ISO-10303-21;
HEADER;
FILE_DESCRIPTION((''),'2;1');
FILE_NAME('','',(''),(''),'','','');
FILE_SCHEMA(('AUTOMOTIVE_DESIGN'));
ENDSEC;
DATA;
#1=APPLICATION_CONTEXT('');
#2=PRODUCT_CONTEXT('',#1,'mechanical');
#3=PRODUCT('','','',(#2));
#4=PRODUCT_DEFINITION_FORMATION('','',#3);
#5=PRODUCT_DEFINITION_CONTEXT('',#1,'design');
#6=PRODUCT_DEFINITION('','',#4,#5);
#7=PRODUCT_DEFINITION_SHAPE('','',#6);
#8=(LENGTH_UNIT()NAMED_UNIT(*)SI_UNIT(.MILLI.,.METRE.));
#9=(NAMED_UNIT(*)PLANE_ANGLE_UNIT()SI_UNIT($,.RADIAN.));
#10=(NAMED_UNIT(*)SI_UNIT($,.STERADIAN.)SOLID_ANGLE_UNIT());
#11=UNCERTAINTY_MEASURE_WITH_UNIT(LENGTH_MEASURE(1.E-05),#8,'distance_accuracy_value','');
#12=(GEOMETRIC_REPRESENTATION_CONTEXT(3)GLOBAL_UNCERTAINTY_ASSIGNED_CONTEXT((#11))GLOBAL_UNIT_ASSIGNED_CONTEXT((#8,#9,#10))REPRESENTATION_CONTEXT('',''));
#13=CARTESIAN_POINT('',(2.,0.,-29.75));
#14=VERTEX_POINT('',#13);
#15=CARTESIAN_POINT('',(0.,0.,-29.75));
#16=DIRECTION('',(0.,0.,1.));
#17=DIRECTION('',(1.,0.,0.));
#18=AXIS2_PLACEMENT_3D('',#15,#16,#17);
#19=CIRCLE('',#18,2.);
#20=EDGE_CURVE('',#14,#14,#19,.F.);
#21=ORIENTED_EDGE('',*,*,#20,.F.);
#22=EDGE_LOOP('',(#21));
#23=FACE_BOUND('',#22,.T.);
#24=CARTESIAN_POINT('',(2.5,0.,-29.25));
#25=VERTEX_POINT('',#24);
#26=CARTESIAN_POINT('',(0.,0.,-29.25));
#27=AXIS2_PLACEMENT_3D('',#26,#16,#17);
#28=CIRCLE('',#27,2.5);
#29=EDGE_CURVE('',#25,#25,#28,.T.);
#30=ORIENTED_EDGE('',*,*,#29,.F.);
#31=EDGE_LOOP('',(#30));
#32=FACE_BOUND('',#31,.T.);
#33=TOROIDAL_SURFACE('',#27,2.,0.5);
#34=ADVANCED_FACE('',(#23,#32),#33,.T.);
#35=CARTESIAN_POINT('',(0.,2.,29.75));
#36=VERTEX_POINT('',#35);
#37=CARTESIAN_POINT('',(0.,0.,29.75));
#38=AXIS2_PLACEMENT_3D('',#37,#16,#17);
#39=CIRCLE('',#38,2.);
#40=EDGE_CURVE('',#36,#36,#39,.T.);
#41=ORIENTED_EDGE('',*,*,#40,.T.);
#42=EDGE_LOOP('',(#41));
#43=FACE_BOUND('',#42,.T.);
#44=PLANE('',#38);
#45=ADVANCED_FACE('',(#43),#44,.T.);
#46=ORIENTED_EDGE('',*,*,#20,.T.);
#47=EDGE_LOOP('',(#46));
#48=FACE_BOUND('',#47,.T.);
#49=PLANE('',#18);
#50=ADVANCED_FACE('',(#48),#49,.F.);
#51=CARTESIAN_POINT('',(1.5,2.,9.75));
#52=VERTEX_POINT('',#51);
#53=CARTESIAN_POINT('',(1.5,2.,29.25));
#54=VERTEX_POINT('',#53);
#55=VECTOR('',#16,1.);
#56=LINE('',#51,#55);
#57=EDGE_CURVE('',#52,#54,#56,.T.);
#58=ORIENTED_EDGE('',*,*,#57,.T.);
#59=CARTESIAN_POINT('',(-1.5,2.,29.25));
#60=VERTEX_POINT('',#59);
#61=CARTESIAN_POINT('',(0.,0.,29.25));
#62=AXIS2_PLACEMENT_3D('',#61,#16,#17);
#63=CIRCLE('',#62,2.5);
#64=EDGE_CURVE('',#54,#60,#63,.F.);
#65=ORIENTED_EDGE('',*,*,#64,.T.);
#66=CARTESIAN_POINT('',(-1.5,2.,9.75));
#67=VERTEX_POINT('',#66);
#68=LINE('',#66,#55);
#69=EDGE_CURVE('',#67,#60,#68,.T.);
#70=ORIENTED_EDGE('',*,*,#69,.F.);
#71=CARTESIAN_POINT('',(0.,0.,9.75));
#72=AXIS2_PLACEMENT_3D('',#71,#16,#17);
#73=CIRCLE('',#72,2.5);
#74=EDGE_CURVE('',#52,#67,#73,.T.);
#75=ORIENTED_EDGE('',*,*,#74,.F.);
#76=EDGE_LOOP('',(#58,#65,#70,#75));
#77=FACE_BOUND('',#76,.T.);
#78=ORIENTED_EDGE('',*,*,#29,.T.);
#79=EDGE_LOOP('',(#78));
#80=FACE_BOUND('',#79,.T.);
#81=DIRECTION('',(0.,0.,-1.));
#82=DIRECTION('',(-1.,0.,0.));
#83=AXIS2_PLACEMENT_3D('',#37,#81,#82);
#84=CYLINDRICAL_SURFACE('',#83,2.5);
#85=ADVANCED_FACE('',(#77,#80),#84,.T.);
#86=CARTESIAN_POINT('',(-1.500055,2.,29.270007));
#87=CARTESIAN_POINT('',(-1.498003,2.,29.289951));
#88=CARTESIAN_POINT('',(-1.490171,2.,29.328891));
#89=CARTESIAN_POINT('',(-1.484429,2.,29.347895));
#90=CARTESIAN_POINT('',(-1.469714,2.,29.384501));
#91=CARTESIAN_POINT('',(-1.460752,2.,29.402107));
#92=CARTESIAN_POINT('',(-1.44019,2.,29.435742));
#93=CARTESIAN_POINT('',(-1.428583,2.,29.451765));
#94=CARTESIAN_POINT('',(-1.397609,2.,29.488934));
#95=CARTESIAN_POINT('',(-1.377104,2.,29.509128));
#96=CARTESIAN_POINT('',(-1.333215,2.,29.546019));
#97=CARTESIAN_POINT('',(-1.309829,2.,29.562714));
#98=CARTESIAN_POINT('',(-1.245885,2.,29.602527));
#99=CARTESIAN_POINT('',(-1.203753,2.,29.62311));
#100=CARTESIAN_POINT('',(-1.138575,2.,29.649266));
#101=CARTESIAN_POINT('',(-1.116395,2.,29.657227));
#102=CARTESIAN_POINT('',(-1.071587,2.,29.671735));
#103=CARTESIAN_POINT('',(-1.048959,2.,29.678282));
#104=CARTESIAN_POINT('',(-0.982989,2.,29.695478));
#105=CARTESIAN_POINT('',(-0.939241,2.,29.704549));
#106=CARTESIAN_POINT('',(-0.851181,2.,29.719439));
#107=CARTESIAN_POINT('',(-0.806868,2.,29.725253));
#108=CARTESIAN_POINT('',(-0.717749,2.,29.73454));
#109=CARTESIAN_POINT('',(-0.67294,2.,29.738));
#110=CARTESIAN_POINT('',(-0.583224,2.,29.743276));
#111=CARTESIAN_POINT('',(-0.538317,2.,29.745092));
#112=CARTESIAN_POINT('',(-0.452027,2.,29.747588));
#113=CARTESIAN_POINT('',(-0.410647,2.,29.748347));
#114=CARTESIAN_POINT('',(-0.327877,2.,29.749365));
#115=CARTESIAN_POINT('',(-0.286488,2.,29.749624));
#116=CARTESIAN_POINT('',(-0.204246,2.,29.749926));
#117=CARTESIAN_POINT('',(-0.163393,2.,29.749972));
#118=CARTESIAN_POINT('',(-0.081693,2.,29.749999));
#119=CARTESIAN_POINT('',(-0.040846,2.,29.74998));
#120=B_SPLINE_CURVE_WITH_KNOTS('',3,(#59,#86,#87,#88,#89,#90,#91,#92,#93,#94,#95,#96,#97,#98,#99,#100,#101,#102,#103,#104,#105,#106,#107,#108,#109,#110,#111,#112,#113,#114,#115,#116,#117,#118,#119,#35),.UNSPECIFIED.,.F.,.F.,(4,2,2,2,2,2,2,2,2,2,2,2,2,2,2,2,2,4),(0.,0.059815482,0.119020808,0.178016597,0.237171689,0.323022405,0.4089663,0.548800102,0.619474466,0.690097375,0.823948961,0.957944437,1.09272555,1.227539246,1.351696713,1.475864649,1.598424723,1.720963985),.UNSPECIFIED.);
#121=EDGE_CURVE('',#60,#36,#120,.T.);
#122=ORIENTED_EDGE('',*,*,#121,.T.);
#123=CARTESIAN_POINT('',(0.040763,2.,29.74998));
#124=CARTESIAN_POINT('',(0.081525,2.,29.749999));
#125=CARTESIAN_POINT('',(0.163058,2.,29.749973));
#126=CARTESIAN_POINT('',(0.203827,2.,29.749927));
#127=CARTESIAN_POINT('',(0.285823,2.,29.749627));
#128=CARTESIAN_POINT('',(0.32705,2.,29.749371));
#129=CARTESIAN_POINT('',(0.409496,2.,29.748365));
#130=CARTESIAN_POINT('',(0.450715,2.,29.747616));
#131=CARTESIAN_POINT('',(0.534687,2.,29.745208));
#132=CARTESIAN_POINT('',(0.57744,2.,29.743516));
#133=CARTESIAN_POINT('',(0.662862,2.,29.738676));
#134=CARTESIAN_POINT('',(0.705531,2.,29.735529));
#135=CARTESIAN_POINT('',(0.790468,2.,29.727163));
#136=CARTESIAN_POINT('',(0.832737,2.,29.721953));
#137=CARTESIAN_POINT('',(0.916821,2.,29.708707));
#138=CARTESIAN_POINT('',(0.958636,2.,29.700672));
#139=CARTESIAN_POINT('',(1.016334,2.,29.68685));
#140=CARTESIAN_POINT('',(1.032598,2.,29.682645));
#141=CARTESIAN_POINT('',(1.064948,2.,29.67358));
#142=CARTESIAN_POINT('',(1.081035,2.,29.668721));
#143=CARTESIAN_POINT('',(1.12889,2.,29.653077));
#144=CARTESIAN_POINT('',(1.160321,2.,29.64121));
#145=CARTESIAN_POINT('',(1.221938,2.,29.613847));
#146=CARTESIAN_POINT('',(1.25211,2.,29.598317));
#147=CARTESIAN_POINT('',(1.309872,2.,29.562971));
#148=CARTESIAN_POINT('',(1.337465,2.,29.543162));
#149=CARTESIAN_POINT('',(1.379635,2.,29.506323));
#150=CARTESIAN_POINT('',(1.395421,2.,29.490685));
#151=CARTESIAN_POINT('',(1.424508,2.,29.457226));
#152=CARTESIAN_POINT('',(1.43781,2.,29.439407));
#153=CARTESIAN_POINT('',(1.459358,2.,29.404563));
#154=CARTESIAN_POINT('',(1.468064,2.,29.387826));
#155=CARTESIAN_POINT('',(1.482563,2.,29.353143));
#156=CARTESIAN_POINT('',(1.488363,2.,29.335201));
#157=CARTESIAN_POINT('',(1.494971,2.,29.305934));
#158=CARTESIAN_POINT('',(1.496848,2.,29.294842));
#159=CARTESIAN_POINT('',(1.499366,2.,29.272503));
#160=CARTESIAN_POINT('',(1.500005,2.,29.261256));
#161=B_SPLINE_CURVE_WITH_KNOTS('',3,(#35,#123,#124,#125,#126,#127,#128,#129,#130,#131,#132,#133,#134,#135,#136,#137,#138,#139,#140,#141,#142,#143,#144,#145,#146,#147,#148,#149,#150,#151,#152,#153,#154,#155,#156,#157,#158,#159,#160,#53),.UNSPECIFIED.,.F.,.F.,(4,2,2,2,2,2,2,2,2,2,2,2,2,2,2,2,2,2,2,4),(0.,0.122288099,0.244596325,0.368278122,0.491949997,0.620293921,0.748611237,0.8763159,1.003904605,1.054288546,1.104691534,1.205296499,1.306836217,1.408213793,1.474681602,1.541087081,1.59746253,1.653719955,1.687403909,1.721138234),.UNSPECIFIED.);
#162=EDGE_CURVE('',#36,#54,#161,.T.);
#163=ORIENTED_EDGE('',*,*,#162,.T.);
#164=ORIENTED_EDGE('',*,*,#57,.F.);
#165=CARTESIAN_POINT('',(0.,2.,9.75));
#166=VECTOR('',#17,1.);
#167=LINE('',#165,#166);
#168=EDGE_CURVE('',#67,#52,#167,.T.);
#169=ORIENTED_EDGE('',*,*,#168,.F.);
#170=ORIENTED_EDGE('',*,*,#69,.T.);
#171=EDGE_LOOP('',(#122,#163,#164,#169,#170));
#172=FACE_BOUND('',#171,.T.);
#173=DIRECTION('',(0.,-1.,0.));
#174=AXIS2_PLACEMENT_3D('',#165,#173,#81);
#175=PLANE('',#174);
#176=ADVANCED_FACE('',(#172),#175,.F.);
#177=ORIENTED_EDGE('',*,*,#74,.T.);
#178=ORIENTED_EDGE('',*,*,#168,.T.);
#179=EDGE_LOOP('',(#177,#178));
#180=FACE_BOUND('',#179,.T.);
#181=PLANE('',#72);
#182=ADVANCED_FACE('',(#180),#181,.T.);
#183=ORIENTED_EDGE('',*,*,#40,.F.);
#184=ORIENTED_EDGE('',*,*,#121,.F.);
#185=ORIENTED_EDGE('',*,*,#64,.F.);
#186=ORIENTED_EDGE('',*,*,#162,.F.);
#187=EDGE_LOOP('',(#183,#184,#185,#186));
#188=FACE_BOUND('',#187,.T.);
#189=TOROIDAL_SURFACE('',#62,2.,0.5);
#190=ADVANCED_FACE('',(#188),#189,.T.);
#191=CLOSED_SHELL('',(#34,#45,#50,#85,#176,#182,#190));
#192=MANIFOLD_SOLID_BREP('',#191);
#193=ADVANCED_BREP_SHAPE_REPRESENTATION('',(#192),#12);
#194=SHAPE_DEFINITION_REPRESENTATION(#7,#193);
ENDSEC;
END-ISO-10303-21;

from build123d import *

# Parameters (mm, degrees)
SKETCH1_R           = 2.5
BOSS_EXTRUDE1_DEPTH = 29.75
CUT_EXTRUDE2_DEPTH  = 20
FILLET1_R           = 0.5


with BuildPart() as part:
    # Sketch1 → Boss-Extrude1 (new, symmetric)
    with BuildSketch(Plane.XY):
        with Locations(Location((0, 0, 0), (0, 0, 180))):
            Circle(SKETCH1_R)
    extrude(amount=BOSS_EXTRUDE1_DEPTH, both=True)

    # Sketch2 → Cut-Extrude2 (cut)
    with BuildSketch(Plane.XY.offset(29.75)):
        with BuildLine():
            ThreePointArc((1.5, 2), (0, 2.5), (-1.5, 2))
            Line((-1.5, 2), (1.5, 2))
        make_face()
    extrude(amount=-CUT_EXTRUDE2_DEPTH, mode=Mode.SUBTRACT)

    # Fillet1
    fillet1_edges = [part.edges().sort_by_distance(p)[0] for p in [
        (2.5, 0, -29.75),
        (1.118033989, -2.236067977, 29.75),
    ]]
    fillet(fillet1_edges, radius=FILLET1_R - 0.0001)  # a hair under: the kernel refuses the full size


solid = part.part
